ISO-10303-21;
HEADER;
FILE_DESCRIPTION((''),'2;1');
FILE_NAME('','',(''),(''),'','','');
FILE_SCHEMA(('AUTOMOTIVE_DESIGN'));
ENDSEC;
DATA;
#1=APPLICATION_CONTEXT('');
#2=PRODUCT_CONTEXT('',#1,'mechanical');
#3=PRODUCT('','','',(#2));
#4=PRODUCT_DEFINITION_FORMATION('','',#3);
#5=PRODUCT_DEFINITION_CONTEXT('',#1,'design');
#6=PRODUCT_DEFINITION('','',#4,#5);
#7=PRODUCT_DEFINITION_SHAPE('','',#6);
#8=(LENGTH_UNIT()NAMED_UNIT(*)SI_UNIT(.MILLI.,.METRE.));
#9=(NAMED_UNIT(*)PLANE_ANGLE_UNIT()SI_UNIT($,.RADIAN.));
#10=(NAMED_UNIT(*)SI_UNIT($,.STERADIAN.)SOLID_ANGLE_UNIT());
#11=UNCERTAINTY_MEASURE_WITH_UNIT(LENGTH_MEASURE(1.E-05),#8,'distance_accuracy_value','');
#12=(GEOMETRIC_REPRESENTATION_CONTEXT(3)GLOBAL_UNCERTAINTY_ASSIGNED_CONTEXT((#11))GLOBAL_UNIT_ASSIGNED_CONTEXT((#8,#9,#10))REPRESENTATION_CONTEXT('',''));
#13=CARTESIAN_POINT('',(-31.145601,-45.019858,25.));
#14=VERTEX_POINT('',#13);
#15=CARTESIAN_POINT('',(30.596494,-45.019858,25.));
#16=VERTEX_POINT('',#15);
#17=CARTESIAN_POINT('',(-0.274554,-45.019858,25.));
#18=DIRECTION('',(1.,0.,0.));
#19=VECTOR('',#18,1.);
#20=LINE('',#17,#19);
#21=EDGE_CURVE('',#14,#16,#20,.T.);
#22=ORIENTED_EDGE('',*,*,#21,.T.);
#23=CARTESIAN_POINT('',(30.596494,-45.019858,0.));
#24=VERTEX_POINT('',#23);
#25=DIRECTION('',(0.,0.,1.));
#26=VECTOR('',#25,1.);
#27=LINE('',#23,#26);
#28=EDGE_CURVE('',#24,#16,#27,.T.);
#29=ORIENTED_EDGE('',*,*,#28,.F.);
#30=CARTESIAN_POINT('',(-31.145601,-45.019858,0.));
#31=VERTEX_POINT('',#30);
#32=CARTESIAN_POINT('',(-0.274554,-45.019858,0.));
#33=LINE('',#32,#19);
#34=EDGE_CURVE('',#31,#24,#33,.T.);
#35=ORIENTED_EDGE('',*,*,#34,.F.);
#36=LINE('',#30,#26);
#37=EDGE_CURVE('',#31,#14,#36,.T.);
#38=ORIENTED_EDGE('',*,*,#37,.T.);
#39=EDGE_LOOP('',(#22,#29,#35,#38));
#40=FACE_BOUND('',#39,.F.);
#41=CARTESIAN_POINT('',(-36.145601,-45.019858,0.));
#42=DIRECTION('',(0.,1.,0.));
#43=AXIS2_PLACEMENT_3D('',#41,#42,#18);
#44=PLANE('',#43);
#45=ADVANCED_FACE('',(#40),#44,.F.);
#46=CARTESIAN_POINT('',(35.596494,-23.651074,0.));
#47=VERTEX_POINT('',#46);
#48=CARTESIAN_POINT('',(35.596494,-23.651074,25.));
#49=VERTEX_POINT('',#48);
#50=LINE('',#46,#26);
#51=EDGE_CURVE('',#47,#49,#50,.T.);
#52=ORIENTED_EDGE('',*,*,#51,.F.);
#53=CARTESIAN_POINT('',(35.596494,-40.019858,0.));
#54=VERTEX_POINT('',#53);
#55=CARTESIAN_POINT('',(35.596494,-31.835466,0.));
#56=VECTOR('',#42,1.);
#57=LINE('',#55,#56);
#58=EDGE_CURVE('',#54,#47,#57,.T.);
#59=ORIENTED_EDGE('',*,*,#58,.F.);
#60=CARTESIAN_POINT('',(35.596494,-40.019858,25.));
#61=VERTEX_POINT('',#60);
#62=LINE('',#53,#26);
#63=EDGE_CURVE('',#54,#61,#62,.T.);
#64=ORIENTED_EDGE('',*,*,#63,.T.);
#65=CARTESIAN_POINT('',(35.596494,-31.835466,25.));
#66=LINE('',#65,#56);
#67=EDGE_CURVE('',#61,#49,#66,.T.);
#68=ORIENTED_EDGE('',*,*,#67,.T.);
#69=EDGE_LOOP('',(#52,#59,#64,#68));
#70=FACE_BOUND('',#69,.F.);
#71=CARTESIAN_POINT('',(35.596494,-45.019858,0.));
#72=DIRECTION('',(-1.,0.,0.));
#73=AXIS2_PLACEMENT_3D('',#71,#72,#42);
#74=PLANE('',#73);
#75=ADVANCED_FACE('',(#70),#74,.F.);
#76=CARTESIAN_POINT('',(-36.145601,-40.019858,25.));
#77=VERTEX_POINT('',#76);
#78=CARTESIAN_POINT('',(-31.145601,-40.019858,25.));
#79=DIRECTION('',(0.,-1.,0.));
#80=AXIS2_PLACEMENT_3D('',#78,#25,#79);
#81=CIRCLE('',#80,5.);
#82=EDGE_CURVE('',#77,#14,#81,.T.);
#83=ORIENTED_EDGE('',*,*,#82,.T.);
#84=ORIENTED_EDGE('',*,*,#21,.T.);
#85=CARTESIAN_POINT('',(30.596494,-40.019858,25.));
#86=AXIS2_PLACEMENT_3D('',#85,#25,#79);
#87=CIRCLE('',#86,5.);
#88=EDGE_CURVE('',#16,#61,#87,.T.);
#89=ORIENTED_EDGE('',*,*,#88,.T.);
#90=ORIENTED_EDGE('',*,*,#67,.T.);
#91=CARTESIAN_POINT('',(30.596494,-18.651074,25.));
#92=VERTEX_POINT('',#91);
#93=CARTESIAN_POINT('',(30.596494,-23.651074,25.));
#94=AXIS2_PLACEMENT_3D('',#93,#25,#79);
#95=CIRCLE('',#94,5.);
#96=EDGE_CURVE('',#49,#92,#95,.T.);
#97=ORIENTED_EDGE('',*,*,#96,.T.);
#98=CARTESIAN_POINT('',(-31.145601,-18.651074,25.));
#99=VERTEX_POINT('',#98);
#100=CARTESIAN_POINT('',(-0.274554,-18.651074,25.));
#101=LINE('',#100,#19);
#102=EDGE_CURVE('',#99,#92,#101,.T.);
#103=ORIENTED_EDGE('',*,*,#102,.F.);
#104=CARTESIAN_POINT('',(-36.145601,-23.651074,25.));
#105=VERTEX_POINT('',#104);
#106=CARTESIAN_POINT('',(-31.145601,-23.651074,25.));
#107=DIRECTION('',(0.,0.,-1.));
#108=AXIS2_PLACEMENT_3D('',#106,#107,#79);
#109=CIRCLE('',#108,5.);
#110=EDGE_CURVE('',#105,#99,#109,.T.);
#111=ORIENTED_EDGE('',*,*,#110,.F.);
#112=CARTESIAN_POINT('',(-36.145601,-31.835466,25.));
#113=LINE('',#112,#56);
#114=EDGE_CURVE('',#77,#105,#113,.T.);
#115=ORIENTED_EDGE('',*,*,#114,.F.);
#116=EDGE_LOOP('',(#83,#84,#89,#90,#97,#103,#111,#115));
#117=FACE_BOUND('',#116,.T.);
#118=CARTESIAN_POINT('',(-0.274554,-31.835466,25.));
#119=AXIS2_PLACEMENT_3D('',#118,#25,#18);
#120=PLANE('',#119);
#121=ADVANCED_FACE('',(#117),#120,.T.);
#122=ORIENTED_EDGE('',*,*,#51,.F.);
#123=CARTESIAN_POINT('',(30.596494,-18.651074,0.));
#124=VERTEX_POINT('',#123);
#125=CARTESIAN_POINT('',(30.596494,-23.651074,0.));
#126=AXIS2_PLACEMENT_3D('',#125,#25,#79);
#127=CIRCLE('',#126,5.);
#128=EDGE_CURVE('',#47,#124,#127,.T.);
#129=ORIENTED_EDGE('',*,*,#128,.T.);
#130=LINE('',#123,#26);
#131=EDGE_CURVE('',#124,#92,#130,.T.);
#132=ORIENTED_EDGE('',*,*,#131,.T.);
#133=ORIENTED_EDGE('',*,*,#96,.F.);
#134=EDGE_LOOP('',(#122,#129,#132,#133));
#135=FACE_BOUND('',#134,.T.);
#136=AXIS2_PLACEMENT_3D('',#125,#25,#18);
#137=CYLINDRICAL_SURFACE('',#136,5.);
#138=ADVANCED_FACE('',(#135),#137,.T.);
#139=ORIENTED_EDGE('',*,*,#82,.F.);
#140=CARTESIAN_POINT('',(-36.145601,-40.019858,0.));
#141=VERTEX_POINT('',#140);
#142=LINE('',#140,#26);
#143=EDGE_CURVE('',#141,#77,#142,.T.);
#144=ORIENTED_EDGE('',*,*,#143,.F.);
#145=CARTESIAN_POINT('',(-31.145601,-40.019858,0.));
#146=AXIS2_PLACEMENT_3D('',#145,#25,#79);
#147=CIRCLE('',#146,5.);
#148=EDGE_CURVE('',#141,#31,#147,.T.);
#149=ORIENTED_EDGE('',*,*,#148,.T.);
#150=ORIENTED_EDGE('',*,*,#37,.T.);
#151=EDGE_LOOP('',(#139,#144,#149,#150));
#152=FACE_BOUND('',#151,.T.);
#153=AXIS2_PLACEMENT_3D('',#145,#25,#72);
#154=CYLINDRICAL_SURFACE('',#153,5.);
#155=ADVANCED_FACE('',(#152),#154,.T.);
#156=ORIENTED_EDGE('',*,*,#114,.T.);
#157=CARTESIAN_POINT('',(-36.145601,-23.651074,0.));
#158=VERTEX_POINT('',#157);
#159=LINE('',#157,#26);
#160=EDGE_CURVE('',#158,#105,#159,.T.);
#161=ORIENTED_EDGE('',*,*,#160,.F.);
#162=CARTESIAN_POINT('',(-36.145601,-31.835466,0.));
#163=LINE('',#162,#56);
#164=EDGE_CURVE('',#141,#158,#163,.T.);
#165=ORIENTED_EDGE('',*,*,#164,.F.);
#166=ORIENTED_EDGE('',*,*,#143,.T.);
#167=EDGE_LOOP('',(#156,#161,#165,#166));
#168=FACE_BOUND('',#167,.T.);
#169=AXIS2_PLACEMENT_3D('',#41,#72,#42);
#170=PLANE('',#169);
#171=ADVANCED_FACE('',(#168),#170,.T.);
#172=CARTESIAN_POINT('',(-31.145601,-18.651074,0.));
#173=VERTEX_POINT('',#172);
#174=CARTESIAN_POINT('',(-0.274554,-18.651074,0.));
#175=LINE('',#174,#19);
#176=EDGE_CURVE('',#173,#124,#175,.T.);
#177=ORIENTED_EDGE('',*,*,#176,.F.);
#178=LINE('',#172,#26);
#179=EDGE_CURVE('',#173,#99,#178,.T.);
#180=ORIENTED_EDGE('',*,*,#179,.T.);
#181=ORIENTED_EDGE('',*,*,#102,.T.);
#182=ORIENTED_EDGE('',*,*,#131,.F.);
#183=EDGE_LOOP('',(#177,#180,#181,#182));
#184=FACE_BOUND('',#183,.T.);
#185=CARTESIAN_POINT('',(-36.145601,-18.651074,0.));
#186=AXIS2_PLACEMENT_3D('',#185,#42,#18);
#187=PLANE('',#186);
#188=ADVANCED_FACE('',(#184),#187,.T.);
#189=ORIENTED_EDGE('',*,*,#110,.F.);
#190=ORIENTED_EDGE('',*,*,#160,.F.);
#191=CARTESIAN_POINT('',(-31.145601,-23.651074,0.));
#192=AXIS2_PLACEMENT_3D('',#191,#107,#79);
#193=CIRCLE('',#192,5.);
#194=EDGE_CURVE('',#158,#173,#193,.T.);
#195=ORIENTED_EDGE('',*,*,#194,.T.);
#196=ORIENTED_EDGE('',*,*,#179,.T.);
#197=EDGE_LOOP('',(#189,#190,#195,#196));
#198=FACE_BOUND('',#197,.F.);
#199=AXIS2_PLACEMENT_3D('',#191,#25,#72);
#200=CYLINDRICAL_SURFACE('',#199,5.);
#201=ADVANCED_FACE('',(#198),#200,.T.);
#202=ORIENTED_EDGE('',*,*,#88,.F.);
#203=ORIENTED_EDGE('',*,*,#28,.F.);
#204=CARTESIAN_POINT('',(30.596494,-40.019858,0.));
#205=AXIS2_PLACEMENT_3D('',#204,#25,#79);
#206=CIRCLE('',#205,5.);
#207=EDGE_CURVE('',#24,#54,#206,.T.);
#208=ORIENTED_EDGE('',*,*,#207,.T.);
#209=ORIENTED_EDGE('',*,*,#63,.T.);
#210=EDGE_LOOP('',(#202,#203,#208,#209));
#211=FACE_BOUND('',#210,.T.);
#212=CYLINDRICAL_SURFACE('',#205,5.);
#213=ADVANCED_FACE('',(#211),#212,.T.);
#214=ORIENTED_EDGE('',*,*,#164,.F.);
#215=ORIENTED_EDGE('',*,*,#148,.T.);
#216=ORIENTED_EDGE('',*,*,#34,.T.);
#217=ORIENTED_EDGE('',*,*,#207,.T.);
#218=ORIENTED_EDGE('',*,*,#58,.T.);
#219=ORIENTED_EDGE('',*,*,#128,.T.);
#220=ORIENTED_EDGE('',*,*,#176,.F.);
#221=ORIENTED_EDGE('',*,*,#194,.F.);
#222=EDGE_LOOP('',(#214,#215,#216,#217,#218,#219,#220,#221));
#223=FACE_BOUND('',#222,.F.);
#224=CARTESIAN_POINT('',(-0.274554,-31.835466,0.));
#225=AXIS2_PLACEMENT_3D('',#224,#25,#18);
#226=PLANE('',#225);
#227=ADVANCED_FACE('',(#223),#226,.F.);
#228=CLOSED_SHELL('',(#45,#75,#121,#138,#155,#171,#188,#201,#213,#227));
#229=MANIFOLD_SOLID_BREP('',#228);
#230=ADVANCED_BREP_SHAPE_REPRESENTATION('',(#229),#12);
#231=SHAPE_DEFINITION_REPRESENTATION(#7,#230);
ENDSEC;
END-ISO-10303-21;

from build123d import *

# Parameters (mm, degrees)
F1_W     = 71.7420950532
F1_H     = 26.3687837869
F2_DEPTH = 25
F3_R     = 5


# Not quite as in the source:
# - a feature of the source that left no trace in its solid (it failed there, or was rolled back) is left out


with BuildPart() as f2:
    # F1 (on Top) → F2 (new body)
    with BuildSketch(Plane.XY):
        with Locations((-0.274553895, -31.835465692)):
            Rectangle(F1_W, F1_H)
    extrude(amount=F2_DEPTH)

    # F3
    f3_edges = [f2.edges().sort_by_distance(p)[0] for p in [
        (-36.145601, -45.019858, 12.5),
        (35.596494, -45.019858, 12.5),
        (35.596494, -18.651074, 12.5),
        (-36.145601, -18.651074, 12.5),
    ]]
    fillet(f3_edges, radius=F3_R)


solid = f2.part
